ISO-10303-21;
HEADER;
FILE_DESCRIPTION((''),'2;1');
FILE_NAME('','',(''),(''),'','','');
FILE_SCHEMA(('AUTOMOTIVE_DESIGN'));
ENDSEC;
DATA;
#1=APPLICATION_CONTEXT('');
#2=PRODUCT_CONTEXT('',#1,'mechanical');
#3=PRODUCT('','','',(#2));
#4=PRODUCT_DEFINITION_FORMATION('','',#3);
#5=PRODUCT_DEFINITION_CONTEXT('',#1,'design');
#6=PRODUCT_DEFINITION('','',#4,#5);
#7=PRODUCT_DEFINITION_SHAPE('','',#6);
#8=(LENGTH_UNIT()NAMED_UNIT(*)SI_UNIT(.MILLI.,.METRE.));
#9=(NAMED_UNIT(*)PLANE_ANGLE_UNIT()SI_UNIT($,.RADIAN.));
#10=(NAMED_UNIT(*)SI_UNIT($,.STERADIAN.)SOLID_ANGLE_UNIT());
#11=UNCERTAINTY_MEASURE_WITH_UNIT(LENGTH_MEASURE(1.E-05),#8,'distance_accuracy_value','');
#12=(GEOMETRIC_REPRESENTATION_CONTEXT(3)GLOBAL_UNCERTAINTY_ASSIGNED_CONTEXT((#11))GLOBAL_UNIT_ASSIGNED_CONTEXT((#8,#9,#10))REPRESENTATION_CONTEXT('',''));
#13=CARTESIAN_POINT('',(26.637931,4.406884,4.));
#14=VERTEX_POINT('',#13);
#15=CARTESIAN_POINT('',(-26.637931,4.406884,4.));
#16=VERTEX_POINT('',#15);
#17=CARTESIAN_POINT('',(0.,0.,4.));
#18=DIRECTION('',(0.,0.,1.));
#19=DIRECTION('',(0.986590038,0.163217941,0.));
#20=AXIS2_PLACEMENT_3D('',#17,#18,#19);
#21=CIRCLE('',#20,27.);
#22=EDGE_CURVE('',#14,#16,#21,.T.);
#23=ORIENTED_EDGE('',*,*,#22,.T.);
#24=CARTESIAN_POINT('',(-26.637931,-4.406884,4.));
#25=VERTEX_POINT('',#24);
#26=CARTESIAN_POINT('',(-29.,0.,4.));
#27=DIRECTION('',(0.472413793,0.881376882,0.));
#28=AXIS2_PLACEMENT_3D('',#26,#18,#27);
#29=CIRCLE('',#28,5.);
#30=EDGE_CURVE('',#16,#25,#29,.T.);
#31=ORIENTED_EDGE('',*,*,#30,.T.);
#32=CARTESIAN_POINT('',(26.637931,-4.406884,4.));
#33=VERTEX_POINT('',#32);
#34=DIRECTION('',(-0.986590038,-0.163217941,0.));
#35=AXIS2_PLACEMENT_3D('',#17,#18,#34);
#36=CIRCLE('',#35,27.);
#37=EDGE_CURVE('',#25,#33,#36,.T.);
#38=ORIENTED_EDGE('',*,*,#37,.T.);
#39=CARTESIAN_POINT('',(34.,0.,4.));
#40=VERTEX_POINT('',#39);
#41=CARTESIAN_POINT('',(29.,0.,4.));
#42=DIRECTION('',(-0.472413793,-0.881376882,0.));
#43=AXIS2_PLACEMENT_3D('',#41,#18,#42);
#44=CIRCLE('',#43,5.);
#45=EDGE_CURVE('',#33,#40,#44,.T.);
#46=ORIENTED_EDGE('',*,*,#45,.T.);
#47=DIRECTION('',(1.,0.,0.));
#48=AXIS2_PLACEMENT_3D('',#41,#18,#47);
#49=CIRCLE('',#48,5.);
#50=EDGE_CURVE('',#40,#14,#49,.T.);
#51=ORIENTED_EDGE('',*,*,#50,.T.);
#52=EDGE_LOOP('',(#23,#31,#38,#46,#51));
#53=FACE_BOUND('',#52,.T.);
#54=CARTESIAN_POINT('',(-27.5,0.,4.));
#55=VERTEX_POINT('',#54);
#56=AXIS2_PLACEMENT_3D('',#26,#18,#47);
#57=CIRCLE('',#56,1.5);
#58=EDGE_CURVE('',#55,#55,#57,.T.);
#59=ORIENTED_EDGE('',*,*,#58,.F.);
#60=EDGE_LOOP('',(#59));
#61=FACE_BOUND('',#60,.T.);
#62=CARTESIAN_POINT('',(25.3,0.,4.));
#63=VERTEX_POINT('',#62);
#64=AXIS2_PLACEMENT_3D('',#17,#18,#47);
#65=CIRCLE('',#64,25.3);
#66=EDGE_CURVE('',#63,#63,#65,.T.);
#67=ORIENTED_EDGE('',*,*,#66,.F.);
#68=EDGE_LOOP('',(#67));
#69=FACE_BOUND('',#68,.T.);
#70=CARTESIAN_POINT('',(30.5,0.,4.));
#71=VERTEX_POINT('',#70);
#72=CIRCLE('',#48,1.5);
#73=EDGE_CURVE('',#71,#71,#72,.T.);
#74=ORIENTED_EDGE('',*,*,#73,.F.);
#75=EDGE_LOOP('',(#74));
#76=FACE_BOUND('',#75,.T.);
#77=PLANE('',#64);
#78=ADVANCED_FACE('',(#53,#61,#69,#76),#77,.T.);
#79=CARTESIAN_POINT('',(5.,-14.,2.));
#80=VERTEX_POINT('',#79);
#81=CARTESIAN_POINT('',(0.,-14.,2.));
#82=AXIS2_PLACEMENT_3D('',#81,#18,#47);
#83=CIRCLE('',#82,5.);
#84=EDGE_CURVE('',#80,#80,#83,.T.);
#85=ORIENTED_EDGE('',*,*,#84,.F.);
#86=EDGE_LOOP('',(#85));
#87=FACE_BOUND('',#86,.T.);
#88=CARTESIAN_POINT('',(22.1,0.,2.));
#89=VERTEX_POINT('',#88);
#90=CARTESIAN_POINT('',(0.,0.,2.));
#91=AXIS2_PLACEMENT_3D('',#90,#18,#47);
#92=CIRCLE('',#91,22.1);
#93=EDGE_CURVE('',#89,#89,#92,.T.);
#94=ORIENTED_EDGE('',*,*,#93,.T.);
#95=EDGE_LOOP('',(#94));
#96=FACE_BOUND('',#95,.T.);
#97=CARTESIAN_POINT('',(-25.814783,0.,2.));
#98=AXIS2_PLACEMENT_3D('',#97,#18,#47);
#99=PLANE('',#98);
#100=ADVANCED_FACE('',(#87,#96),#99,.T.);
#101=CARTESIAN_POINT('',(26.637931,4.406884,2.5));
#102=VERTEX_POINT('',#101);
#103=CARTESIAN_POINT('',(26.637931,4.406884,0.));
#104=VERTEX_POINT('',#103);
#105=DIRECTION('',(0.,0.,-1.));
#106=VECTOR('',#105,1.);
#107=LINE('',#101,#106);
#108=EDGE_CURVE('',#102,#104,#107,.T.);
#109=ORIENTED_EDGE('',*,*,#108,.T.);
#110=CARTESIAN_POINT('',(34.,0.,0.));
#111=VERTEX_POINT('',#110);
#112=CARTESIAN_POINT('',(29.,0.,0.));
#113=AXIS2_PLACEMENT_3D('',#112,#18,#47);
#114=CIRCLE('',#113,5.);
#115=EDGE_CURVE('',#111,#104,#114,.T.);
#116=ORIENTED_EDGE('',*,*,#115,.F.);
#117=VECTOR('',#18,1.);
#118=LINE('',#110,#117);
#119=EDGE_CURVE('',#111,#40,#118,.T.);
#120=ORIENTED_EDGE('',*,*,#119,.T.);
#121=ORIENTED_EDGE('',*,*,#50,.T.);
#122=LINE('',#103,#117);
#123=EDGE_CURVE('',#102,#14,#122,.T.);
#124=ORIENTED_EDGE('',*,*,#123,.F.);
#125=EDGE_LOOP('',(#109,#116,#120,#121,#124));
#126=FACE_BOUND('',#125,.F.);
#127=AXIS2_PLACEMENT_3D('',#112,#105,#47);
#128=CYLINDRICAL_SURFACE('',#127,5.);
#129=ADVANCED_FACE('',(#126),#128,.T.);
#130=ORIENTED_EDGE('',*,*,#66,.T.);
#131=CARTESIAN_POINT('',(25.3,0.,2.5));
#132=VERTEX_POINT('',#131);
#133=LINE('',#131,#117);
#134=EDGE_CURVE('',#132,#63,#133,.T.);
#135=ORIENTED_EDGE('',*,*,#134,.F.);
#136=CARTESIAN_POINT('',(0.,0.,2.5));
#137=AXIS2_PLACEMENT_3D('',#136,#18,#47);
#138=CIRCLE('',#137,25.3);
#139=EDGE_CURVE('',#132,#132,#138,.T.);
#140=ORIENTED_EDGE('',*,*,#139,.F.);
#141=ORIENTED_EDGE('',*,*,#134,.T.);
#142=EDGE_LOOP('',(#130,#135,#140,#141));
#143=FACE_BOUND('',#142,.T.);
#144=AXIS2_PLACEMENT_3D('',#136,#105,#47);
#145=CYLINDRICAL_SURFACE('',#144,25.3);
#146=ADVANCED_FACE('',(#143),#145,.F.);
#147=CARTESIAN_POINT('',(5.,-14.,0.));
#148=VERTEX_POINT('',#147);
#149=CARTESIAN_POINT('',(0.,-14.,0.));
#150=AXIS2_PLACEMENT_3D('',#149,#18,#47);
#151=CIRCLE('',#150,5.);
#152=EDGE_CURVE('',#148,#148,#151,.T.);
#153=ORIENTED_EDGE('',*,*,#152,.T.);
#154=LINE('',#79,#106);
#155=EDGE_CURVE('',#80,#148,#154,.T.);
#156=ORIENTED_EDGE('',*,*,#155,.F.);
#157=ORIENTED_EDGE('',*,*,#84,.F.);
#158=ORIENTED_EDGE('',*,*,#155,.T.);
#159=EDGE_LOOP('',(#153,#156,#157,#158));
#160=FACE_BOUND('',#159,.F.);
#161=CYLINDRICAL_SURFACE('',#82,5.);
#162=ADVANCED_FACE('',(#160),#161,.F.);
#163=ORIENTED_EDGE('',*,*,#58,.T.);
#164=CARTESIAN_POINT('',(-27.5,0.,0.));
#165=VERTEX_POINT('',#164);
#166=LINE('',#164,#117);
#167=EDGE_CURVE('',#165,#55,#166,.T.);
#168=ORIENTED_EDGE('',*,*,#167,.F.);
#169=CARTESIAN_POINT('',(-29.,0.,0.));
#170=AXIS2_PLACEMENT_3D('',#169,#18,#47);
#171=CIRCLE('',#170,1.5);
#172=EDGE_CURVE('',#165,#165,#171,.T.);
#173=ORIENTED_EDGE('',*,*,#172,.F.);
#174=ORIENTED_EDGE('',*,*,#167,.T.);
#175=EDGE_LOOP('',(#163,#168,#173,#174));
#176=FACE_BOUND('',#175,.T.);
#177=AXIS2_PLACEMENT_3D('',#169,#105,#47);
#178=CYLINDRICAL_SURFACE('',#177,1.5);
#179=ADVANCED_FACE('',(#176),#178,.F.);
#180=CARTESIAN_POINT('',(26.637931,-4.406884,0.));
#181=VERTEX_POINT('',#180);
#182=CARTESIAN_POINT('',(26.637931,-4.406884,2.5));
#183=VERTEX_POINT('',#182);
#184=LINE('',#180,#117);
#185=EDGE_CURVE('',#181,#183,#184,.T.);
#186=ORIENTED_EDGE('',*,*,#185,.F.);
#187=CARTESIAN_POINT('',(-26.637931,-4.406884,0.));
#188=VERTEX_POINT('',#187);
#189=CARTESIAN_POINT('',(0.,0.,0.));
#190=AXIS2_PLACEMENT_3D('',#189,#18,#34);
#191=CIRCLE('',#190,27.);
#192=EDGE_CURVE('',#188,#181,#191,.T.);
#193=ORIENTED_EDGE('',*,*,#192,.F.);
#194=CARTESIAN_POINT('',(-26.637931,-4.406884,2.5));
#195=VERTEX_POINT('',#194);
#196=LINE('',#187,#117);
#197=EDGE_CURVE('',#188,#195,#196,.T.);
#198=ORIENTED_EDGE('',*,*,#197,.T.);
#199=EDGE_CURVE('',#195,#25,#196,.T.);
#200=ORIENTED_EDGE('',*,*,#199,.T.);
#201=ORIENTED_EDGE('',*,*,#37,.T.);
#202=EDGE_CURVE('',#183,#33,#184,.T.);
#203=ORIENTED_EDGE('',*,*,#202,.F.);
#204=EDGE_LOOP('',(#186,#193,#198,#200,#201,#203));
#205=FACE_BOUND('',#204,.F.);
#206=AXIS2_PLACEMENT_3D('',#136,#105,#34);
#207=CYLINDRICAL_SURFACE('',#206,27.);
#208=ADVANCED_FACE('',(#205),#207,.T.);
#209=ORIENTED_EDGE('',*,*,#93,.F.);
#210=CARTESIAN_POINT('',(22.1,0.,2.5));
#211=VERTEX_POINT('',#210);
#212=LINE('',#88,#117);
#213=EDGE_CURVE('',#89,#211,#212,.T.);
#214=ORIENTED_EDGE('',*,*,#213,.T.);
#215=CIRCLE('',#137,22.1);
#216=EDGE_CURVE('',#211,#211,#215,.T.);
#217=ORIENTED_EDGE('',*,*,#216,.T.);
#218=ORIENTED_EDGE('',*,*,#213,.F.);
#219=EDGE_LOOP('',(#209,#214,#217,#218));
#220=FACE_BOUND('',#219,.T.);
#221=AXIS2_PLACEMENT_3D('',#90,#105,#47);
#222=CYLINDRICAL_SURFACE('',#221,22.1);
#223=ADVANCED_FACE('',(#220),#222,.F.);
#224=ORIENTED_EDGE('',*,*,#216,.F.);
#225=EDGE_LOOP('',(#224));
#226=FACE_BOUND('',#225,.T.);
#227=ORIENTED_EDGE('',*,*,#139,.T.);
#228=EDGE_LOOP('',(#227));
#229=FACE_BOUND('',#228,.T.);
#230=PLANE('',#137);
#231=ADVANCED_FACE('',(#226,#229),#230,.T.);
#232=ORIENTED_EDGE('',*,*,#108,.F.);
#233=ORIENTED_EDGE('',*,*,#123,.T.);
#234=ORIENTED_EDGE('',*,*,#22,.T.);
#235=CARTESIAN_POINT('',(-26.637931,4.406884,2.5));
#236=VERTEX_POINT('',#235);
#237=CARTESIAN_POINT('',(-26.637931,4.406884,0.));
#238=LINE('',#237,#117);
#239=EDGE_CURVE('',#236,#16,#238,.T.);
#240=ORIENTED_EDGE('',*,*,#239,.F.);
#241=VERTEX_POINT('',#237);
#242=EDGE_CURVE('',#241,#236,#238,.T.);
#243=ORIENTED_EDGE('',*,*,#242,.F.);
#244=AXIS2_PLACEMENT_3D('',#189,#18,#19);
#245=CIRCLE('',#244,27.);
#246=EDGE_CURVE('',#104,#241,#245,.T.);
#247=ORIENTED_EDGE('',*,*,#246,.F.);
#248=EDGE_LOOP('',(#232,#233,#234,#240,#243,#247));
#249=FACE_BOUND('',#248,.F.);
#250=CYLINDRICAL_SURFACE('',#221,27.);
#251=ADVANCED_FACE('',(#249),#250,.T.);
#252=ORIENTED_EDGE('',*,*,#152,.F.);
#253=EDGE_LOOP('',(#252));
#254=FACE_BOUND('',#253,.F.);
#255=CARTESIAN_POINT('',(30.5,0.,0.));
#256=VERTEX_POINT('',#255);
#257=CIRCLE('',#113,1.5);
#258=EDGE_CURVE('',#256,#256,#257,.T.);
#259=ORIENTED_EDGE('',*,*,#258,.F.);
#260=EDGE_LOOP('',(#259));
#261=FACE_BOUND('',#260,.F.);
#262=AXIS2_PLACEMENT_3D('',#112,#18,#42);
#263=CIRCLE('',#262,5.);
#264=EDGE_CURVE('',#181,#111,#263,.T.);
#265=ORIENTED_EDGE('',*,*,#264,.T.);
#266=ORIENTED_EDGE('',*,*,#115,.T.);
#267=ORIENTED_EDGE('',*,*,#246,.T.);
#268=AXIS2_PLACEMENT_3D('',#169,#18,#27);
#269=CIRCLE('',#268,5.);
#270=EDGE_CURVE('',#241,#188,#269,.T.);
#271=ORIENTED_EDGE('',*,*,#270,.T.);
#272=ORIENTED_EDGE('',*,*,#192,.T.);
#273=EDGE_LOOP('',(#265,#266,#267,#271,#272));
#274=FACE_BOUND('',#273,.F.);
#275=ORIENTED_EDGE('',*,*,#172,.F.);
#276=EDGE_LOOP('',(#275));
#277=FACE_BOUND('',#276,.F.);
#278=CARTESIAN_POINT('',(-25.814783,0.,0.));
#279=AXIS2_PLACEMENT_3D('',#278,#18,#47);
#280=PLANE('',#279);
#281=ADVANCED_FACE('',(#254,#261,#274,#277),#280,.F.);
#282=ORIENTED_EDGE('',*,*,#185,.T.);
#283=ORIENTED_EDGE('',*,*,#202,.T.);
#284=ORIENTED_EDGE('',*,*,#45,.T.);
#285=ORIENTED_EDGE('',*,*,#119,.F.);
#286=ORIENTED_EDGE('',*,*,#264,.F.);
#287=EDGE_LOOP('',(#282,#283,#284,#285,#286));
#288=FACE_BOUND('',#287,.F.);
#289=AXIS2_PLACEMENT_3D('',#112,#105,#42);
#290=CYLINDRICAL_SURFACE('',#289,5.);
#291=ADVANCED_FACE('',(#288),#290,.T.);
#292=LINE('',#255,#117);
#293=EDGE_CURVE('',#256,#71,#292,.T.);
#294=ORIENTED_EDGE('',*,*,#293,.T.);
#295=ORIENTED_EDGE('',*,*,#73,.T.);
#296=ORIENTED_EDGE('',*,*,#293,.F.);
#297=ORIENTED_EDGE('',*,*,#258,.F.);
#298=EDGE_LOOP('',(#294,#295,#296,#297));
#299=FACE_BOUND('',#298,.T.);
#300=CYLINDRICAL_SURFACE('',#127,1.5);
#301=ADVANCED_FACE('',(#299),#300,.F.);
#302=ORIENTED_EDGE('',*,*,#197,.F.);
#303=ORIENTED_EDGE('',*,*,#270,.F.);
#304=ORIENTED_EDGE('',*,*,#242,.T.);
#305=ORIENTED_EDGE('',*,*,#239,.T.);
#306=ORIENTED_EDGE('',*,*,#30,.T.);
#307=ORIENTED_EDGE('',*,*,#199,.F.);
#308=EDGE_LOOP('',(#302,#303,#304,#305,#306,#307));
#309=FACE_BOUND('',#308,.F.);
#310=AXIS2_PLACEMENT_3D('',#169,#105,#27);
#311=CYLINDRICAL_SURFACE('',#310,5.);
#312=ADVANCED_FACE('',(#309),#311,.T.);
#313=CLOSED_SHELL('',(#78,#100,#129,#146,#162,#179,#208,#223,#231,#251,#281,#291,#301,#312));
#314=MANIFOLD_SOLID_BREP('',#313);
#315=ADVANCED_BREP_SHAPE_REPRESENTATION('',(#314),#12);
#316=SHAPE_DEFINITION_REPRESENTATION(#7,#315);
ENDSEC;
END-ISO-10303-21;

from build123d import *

# Parameters (mm, degrees)
F0_R     = 1.5
F1_DEPTH = 4
F2_DEPTH = 2
F3_R     = 27
F3_R_2   = 22.1
F4_DEPTH = 0.5
F5_R     = 25.3
F6_DEPTH = 1.5
F7_R     = 5
F8_DEPTH = 25


with BuildPart() as f1:
    # F0 (on Top) → F1 (new body)
    with BuildSketch(Plane.XY):
        with BuildLine():
            ThreePointArc((-26.6379310345, -4.4068844099), (-27, 0), (-26.6379310345, 4.4068844099))
            ThreePointArc((-26.6379310345, 4.4068844099), (-34, 0), (-26.6379310345, -4.4068844099))
        make_face()
        with Locations((-29, 0)):
            Circle(F0_R, mode=Mode.SUBTRACT)
    extrude(amount=F1_DEPTH)



with BuildPart() as f1b:
    # F0 (on Top) → F1, piece 2 (new body)
    with BuildSketch(Plane.XY):
        with BuildLine():
            ThreePointArc((26.6379310345, 4.4068844099), (26.9093305187, 2.21086658), (27, 0))
            ThreePointArc((27, 0), (26.9093305187, -2.21086658), (26.6379310345, -4.4068844099))
            ThreePointArc((26.6379310345, -4.4068844099), (31.5680396388, -4.2901249881), (34, 0))
            ThreePointArc((34, 0), (31.5680396388, 4.2901249881), (26.6379310345, 4.4068844099))
        make_face()
        with Locations((29, 0)):
            Circle(F0_R, mode=Mode.SUBTRACT)
    extrude(amount=F1_DEPTH)


with BuildPart() as f2:
    # F0 (on Top) → F2 (new body)
    with BuildSketch(Plane.XY):
        with BuildLine():
            ThreePointArc((-24, 0), (-24.7098750119, 2.5680396388), (-26.6379310345, 4.4068844099))
            ThreePointArc((-26.6379310345, 4.4068844099), (-27, 0), (-26.6379310345, -4.4068844099))
            ThreePointArc((-26.6379310345, -4.4068844099), (-24.7098750119, -2.5680396388), (-24, 0))
        make_face()
        with BuildLine():
            ThreePointArc((26.6379310345, -4.4068844099), (26.9093305187, -2.21086658), (27, 0))
            ThreePointArc((27, 0), (26.9093305187, 2.21086658), (26.6379310345, 4.4068844099))
            ThreePointArc((26.6379310345, 4.4068844099), (24, 0), (26.6379310345, -4.4068844099))
        make_face()
        with BuildLine():
            ThreePointArc((26.6379310345, -4.4068844099), (24, 0), (26.6379310345, 4.4068844099))
            ThreePointArc((26.6379310345, 4.4068844099), (0, 27), (-26.6379310345, 4.4068844099))
            ThreePointArc((-26.6379310345, 4.4068844099), (-24.7098750119, 2.5680396388), (-24, 0))
            ThreePointArc((-24, 0), (-24.7098750119, -2.5680396388), (-26.6379310345, -4.4068844099))
            ThreePointArc((-26.6379310345, -4.4068844099), (0, -27), (26.6379310345, -4.4068844099))
        make_face()
    extrude(amount=F2_DEPTH)


with BuildPart() as f1_1:
    add(f1.part)

    add(f1b.part)  # F4 merges F1b

    add(f2.part)  # F4 merges F2
    # F3 (on face) → F4 (join)
    with BuildSketch(Plane.XY.offset(2)):
        Circle(F3_R)
        Circle(F3_R_2, mode=Mode.SUBTRACT)
    extrude(amount=F4_DEPTH)

    # F5 (on face) → F6 (join)
    with BuildSketch(Plane.XY.offset(2.5)):
        with BuildLine():
            ThreePointArc((26.6379310345, -4.4068844099), (27, 0), (26.6379310345, 4.4068844099))
            ThreePointArc((26.6379310345, 4.4068844099), (0, 27), (-26.6379310345, 4.4068844099))
            ThreePointArc((-26.6379310345, 4.4068844099), (-27, 0), (-26.6379310345, -4.4068844099))
            ThreePointArc((-26.6379310345, -4.4068844099), (0, -27), (26.6379310345, -4.4068844099))
        make_face()
        Circle(F5_R, mode=Mode.SUBTRACT)
    extrude(amount=F6_DEPTH)

    # F7 (on face) → F8 (cut)
    with BuildSketch(Plane.XY.offset(2)):
        with Locations((0, -14)):
            Circle(F7_R)
    extrude(amount=-F8_DEPTH, mode=Mode.SUBTRACT)


solid = f1_1.part
